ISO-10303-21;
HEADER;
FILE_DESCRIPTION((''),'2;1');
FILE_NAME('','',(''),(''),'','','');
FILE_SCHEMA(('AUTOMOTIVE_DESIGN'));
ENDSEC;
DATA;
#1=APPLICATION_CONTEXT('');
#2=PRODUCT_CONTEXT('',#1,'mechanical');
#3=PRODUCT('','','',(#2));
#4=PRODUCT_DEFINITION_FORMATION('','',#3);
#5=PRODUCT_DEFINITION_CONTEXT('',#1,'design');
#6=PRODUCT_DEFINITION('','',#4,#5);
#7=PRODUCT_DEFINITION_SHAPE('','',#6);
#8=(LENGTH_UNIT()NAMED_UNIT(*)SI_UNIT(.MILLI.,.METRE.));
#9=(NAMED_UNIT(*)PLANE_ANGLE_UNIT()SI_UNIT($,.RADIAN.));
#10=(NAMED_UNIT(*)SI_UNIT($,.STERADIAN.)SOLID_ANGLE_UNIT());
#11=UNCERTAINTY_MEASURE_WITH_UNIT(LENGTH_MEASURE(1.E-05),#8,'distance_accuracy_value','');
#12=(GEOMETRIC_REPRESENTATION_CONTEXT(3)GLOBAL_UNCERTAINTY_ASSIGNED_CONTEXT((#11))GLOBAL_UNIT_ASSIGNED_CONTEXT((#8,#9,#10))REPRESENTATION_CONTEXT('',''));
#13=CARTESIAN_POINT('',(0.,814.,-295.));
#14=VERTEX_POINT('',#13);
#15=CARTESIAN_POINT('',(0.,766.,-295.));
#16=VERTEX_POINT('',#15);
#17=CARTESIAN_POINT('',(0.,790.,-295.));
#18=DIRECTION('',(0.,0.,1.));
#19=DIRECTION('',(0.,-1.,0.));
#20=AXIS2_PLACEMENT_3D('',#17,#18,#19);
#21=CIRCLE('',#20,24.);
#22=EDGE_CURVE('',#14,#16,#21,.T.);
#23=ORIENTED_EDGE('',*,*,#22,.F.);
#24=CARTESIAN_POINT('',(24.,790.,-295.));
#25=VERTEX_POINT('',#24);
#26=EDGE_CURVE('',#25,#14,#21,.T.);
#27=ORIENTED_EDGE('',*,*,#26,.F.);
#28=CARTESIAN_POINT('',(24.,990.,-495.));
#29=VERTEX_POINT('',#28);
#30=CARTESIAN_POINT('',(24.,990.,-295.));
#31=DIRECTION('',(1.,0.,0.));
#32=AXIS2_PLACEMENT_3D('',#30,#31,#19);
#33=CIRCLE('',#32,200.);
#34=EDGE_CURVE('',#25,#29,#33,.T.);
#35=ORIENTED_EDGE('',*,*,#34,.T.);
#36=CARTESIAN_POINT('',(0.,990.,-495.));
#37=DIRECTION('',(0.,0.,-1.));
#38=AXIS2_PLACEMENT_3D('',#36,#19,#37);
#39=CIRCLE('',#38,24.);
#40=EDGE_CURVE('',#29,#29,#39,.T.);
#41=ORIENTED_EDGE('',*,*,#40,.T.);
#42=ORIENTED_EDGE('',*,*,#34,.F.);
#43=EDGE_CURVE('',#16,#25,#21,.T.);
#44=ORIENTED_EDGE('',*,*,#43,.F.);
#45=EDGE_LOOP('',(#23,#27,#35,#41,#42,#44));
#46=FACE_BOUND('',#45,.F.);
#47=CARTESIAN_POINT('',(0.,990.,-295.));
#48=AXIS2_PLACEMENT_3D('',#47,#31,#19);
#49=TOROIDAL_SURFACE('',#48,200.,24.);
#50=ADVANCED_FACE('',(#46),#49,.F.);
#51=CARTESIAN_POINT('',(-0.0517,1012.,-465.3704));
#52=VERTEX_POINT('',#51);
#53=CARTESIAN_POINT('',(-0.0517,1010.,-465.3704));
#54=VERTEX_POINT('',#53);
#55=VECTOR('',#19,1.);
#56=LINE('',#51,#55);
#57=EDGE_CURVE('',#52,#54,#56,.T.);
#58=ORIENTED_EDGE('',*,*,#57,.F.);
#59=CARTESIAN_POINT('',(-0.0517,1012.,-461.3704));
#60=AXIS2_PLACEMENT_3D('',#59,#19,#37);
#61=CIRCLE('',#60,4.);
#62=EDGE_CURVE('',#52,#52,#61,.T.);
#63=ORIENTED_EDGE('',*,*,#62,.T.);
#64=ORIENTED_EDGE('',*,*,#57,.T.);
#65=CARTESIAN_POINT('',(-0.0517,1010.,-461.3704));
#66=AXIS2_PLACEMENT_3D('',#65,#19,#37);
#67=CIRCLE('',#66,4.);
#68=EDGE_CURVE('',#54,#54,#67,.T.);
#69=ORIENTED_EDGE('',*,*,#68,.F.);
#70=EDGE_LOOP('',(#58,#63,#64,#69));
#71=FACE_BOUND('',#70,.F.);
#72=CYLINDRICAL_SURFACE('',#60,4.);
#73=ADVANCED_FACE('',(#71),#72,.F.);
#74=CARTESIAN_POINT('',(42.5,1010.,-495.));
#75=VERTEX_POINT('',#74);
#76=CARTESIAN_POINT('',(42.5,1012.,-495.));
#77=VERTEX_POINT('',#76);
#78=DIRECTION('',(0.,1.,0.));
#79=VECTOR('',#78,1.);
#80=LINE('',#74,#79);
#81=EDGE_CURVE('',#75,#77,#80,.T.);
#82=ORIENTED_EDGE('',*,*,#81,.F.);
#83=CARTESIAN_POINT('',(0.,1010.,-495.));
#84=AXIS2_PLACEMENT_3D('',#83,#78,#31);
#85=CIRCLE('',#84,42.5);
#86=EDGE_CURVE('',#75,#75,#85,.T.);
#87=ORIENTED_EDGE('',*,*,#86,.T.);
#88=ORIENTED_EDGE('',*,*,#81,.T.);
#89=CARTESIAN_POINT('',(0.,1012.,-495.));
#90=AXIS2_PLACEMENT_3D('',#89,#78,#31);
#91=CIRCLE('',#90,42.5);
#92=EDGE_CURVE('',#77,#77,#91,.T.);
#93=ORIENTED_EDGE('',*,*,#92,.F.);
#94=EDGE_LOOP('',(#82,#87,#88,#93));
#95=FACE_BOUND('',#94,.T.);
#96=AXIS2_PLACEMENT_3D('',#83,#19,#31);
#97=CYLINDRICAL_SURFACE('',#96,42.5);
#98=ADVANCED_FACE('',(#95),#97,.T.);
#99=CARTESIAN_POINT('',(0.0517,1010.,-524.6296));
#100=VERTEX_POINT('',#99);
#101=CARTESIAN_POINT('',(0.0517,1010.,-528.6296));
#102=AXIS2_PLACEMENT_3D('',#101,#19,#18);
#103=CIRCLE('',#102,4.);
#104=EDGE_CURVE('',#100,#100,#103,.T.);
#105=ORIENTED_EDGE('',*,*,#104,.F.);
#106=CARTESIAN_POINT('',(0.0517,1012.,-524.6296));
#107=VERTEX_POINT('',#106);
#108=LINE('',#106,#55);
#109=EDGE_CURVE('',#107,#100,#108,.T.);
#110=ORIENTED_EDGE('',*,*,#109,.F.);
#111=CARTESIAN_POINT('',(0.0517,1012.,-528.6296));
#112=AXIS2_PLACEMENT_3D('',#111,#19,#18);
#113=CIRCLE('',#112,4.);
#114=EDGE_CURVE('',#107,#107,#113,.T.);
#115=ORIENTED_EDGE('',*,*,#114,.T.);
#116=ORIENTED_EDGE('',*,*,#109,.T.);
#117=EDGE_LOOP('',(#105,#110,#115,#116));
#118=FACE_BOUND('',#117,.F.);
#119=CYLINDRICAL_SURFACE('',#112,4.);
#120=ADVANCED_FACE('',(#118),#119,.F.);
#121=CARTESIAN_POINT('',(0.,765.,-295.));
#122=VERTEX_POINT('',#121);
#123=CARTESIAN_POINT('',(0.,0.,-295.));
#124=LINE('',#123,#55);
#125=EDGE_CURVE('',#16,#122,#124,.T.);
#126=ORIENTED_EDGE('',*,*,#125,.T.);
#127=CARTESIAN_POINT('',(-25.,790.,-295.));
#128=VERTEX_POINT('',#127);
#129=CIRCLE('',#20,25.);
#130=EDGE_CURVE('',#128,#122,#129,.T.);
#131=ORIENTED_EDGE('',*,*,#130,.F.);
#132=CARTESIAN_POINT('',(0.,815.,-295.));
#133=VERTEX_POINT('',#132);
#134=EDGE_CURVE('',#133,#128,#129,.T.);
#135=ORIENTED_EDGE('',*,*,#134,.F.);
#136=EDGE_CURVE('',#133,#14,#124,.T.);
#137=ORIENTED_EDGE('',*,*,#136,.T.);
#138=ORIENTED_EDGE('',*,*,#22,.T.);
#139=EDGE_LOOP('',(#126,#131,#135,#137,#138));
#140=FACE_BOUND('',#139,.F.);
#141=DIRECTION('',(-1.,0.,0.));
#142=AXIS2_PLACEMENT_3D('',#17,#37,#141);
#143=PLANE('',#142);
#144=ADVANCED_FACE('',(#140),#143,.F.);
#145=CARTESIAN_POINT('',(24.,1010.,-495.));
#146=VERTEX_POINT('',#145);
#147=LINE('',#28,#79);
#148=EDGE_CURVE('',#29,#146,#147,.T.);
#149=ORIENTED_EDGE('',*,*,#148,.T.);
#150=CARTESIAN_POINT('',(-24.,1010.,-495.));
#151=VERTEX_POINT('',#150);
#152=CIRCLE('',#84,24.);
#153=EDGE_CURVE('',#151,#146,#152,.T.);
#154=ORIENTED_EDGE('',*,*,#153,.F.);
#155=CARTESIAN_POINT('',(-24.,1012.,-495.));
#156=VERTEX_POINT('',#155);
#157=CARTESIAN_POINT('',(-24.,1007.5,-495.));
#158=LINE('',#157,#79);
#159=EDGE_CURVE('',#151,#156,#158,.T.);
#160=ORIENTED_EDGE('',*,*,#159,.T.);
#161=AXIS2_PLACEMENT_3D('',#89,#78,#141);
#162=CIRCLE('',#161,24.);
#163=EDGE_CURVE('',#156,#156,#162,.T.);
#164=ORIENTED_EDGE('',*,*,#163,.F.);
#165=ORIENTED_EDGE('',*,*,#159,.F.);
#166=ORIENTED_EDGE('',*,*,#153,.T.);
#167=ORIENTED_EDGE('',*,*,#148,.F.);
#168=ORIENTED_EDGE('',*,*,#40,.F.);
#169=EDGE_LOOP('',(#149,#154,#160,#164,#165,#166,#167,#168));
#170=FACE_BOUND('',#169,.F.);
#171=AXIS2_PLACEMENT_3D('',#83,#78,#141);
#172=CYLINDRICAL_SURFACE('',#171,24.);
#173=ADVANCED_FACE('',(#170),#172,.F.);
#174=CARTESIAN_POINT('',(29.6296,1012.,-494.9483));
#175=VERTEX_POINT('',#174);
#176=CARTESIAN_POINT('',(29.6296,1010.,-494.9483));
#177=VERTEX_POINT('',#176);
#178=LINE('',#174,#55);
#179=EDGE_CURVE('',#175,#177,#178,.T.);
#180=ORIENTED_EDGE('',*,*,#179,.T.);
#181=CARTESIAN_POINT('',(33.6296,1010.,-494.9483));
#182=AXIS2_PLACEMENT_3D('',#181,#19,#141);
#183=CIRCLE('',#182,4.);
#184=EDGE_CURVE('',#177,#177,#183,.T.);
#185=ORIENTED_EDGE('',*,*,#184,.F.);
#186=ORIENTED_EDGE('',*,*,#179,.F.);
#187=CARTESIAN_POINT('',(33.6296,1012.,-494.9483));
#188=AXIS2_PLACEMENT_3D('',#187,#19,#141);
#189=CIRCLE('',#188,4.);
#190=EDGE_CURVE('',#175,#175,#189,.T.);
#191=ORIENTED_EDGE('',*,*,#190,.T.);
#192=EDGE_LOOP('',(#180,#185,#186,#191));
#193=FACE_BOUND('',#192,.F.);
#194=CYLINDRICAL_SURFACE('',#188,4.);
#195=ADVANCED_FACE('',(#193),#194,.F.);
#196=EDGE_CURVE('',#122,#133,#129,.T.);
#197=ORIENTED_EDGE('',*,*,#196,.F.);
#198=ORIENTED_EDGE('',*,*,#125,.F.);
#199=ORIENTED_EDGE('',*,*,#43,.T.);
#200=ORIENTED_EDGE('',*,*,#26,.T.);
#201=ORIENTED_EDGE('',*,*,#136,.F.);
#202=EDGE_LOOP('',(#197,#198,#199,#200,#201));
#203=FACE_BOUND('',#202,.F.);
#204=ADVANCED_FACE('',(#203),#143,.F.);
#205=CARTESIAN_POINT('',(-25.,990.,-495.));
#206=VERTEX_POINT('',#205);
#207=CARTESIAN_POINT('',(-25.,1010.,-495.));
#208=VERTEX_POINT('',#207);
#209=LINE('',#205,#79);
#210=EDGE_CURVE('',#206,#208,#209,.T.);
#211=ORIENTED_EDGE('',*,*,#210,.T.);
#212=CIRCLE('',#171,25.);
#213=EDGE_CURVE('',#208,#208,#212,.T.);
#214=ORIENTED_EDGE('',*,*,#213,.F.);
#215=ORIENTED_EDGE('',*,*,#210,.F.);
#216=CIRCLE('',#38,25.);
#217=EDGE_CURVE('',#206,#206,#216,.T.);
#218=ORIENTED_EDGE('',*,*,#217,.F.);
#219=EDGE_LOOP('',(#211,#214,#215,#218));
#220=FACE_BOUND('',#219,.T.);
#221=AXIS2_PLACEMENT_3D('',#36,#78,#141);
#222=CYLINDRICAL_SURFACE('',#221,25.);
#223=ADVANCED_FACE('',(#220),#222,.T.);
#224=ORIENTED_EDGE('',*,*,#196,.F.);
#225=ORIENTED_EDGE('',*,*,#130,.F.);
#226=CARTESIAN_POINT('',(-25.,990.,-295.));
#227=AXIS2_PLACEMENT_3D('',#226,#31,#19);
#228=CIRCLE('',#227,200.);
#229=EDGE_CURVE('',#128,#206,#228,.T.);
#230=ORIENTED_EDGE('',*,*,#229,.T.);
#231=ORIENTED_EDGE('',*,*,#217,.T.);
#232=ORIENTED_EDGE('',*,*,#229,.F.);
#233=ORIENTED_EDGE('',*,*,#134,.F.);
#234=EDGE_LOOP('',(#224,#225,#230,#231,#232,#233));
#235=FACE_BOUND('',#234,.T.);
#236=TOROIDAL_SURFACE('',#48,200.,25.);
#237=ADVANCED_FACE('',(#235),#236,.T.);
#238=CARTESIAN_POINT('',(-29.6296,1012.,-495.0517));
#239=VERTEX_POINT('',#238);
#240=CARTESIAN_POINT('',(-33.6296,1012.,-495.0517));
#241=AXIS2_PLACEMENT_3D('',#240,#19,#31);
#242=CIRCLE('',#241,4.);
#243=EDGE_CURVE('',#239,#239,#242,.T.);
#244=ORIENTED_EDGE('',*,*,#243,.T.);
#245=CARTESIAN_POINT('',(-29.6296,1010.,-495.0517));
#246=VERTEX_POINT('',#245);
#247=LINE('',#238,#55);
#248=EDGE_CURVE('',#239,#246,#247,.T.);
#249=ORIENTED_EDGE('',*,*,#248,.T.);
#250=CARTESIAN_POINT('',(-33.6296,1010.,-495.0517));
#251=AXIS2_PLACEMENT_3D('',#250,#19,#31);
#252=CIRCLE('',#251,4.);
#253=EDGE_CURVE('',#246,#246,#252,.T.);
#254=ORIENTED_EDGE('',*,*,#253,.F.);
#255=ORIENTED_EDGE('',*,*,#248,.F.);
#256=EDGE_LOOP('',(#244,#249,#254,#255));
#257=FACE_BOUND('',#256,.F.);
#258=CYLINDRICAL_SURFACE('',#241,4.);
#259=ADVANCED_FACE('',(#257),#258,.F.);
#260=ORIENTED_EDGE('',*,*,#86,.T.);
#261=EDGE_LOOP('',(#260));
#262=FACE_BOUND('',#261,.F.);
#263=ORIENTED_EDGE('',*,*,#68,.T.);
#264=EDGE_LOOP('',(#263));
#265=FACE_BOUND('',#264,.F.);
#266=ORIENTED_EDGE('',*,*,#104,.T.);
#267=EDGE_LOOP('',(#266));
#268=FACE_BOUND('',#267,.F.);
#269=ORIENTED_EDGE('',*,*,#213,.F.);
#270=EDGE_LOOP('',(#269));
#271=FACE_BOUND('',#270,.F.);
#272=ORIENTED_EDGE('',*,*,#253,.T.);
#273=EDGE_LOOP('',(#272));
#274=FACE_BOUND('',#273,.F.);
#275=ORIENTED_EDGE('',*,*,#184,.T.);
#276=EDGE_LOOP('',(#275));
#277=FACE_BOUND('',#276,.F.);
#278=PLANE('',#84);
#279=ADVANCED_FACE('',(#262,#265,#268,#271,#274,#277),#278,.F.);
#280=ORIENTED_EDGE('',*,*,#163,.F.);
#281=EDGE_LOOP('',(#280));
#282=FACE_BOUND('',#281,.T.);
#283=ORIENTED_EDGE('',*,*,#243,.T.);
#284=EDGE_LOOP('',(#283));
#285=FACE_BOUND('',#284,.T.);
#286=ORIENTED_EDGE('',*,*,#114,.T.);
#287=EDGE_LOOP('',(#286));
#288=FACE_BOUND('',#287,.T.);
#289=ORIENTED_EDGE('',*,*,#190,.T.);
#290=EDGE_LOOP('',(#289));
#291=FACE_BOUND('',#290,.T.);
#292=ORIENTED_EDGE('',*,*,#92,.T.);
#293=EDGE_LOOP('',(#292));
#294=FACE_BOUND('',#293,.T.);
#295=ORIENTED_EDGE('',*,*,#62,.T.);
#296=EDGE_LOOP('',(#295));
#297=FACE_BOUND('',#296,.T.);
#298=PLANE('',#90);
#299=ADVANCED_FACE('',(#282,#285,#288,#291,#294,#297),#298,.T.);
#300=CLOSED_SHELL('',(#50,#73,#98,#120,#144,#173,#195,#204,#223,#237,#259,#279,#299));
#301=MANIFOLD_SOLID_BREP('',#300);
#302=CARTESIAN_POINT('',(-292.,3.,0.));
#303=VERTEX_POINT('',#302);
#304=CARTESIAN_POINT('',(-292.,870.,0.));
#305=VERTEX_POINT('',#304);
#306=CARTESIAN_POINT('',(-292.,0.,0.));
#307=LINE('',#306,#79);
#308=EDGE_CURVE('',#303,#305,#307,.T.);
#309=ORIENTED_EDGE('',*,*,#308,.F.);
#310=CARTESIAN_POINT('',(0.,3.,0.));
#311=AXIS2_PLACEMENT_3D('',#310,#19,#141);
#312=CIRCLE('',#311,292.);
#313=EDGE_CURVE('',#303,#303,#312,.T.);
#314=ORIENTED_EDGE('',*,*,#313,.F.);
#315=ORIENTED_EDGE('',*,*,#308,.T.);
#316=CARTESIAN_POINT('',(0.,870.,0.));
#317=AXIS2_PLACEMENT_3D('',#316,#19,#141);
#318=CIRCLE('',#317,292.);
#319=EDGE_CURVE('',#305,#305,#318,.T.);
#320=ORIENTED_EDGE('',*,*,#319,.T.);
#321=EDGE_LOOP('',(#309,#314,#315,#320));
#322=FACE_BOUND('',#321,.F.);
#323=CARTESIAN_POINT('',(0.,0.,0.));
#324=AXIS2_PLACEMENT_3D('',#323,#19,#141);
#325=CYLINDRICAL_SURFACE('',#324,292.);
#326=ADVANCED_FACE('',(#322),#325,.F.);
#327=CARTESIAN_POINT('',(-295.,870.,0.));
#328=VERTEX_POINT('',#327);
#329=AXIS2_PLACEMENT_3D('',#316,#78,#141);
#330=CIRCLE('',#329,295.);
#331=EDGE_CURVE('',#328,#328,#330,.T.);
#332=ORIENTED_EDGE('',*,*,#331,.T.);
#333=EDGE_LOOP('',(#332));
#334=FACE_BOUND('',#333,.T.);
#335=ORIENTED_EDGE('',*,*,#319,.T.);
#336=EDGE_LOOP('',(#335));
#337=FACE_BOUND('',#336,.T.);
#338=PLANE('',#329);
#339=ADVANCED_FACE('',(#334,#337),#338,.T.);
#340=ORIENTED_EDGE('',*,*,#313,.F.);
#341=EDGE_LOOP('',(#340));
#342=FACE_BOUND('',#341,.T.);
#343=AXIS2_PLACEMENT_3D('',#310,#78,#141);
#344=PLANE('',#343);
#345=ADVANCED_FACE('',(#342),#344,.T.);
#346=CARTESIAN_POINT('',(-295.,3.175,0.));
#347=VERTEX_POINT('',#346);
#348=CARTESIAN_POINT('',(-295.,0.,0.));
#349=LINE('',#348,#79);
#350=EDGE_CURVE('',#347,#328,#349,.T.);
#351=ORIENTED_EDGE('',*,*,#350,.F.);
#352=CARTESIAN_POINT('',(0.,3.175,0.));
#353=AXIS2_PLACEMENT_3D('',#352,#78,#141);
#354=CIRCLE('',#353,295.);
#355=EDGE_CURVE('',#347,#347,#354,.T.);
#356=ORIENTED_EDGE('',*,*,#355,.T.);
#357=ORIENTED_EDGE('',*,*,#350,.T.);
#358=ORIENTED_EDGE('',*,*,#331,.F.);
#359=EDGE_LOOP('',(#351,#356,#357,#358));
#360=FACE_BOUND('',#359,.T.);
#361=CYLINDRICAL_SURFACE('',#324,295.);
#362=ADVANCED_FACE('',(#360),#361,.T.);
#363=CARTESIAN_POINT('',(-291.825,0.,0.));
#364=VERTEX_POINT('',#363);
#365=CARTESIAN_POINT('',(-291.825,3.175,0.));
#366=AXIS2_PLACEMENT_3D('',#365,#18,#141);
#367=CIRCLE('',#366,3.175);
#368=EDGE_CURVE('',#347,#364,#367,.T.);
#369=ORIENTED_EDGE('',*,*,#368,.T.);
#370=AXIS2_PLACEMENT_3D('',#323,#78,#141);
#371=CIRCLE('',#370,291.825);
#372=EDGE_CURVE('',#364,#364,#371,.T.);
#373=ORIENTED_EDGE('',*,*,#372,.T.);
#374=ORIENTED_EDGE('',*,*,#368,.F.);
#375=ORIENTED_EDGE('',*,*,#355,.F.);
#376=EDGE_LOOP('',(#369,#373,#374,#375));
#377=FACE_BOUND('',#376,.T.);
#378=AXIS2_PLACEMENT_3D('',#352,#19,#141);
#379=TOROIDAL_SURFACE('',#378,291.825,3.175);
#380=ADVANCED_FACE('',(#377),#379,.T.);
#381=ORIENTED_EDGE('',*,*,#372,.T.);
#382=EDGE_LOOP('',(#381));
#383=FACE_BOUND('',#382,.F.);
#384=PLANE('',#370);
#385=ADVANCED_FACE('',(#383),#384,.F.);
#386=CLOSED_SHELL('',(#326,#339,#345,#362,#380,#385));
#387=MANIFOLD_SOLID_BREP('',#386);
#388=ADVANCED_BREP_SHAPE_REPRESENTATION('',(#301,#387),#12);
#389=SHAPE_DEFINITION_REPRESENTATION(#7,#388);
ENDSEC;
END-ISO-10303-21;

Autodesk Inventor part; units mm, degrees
ref_plane "YZ Plane" through (0, 0, 0) normal (1, 0, 0) x (0, 1, 0)
ref_plane "XZ Plane" through (0, 0, 0) normal (0, 1, 0) x (-1, 0, 0)
ref_plane "XY Plane" through (0, 0, 0) normal (0, 0, 1) x (1, 0, 0)
sketch "Sketch1" plane through (0, 0, 0) normal (0, 1, 0) x (-1, 0, 0)
  circle A0 centre (0, 0) radius 295
  dimension "d0" = 590
extrude "Extrusion1" add sketch "Sketch1" along normal blind 870
shell "Shell1" thickness 3 removed faces 1 at (-9.963, 870, -139.7076)
sketch "Sketch2" plane through (0, 0, 0) normal (1, 0, 0) x (0, 1, 0)
  line L0 (990, -495) -> (1010, -495)
  line L1 (870, -295) -> (870, 295) projected
  line L2 (870, -295) -> (670, -295)
  line L3 (0, -295) -> (870, -295) projected
  arc A0 (790, -295) -> (990, -495) centre (990, -295) ccw
  line L4 (3, -292) -> (870, -292) projected
  line L5 (790, -295) -> (840.8, -295)
  line L6 (790.0347, -291.2721) -> (790, -291.2721)
  line L7 (790, -292) -> (790, -291.2721)
  line L8 (790, -295) -> (790, -280.1792)
  point P0 (0, 0)
  point P1 (790, -495)
  dimension "d5" = 200
  dimension "d6" = 200
  dimension "d7" = 220
  dimension "d8" = 200
  dimension "d16" = 50.8
ref_plane "Work Plane1" through (0, 1010, -495) normal (0, 1, 0) x (-1, 0, 0)
sketch "Sketch3" plane through (0, 1010, -495) normal (0, 1, 0) x (-1, 0, 0)
  circle A0 centre (0, 0) radius 25
  point P0 (0, 495)
  dimension "d9" = 50
sweep "Sweep1" add profiles "Sketch3" path "Sketch2" path curves L0 A0
sketch "Sketch4" plane through (0, 1010, -495) normal (0, 1, 0) x (1, 0, 0)
  circle A0 centre (0, 0) radius 25 projected
  circle A1 centre (0, 0) radius 24
  point P0 (0, -495)
  dimension "d13" = 48
sweep "Sweep2" cut profiles "Sketch4" path "Sketch2" path curves L0 A0 contours A1
sketch "Sketch5" plane through (0, 1010, -495) normal (0, 1, 0) x (1, 0, 0)
  circle A0 centre (0, 0) radius 42.5
  point P0 (0, -495)
  dimension "d17" = 85
extrude "Extrusion2" add sketch "Sketch5" along normal blind 2
sketch "Sketch6" plane through (0, 1010, -495) normal (0, 1, 0) x (-1, 0, 0)
  circle A0 centre (0, 0) radius 24
  point P0 (0, 495)
  dimension "d20" = 48
extrude "Extrusion3" cut sketch "Sketch6" against normal mid plane 5
sketch "Sketch7" plane through (0, 1012, -495) normal (0, 1, 0) x (1, 0, 0)
  circle A0 centre (0, 0) radius 42.5 projected
  point P0 (0, -495)
  point P1 (0.0517, 33.6296)
  dimension "d30" = 33.6296
hole "Hole1" at (0.0517, 1012, -528.6296) direction (0, -1, 0) diameter 8 depth 10 tip angle 118
pattern_circular "Circular Pattern1" count 4 over 360 about axis through (0, 1010, -495) along (0, -1, 0) of "Hole1"
fillet "Fillet1" radius 3.175 1 edges at (295, 0, 0)
properties part number "still" material "Gold"
